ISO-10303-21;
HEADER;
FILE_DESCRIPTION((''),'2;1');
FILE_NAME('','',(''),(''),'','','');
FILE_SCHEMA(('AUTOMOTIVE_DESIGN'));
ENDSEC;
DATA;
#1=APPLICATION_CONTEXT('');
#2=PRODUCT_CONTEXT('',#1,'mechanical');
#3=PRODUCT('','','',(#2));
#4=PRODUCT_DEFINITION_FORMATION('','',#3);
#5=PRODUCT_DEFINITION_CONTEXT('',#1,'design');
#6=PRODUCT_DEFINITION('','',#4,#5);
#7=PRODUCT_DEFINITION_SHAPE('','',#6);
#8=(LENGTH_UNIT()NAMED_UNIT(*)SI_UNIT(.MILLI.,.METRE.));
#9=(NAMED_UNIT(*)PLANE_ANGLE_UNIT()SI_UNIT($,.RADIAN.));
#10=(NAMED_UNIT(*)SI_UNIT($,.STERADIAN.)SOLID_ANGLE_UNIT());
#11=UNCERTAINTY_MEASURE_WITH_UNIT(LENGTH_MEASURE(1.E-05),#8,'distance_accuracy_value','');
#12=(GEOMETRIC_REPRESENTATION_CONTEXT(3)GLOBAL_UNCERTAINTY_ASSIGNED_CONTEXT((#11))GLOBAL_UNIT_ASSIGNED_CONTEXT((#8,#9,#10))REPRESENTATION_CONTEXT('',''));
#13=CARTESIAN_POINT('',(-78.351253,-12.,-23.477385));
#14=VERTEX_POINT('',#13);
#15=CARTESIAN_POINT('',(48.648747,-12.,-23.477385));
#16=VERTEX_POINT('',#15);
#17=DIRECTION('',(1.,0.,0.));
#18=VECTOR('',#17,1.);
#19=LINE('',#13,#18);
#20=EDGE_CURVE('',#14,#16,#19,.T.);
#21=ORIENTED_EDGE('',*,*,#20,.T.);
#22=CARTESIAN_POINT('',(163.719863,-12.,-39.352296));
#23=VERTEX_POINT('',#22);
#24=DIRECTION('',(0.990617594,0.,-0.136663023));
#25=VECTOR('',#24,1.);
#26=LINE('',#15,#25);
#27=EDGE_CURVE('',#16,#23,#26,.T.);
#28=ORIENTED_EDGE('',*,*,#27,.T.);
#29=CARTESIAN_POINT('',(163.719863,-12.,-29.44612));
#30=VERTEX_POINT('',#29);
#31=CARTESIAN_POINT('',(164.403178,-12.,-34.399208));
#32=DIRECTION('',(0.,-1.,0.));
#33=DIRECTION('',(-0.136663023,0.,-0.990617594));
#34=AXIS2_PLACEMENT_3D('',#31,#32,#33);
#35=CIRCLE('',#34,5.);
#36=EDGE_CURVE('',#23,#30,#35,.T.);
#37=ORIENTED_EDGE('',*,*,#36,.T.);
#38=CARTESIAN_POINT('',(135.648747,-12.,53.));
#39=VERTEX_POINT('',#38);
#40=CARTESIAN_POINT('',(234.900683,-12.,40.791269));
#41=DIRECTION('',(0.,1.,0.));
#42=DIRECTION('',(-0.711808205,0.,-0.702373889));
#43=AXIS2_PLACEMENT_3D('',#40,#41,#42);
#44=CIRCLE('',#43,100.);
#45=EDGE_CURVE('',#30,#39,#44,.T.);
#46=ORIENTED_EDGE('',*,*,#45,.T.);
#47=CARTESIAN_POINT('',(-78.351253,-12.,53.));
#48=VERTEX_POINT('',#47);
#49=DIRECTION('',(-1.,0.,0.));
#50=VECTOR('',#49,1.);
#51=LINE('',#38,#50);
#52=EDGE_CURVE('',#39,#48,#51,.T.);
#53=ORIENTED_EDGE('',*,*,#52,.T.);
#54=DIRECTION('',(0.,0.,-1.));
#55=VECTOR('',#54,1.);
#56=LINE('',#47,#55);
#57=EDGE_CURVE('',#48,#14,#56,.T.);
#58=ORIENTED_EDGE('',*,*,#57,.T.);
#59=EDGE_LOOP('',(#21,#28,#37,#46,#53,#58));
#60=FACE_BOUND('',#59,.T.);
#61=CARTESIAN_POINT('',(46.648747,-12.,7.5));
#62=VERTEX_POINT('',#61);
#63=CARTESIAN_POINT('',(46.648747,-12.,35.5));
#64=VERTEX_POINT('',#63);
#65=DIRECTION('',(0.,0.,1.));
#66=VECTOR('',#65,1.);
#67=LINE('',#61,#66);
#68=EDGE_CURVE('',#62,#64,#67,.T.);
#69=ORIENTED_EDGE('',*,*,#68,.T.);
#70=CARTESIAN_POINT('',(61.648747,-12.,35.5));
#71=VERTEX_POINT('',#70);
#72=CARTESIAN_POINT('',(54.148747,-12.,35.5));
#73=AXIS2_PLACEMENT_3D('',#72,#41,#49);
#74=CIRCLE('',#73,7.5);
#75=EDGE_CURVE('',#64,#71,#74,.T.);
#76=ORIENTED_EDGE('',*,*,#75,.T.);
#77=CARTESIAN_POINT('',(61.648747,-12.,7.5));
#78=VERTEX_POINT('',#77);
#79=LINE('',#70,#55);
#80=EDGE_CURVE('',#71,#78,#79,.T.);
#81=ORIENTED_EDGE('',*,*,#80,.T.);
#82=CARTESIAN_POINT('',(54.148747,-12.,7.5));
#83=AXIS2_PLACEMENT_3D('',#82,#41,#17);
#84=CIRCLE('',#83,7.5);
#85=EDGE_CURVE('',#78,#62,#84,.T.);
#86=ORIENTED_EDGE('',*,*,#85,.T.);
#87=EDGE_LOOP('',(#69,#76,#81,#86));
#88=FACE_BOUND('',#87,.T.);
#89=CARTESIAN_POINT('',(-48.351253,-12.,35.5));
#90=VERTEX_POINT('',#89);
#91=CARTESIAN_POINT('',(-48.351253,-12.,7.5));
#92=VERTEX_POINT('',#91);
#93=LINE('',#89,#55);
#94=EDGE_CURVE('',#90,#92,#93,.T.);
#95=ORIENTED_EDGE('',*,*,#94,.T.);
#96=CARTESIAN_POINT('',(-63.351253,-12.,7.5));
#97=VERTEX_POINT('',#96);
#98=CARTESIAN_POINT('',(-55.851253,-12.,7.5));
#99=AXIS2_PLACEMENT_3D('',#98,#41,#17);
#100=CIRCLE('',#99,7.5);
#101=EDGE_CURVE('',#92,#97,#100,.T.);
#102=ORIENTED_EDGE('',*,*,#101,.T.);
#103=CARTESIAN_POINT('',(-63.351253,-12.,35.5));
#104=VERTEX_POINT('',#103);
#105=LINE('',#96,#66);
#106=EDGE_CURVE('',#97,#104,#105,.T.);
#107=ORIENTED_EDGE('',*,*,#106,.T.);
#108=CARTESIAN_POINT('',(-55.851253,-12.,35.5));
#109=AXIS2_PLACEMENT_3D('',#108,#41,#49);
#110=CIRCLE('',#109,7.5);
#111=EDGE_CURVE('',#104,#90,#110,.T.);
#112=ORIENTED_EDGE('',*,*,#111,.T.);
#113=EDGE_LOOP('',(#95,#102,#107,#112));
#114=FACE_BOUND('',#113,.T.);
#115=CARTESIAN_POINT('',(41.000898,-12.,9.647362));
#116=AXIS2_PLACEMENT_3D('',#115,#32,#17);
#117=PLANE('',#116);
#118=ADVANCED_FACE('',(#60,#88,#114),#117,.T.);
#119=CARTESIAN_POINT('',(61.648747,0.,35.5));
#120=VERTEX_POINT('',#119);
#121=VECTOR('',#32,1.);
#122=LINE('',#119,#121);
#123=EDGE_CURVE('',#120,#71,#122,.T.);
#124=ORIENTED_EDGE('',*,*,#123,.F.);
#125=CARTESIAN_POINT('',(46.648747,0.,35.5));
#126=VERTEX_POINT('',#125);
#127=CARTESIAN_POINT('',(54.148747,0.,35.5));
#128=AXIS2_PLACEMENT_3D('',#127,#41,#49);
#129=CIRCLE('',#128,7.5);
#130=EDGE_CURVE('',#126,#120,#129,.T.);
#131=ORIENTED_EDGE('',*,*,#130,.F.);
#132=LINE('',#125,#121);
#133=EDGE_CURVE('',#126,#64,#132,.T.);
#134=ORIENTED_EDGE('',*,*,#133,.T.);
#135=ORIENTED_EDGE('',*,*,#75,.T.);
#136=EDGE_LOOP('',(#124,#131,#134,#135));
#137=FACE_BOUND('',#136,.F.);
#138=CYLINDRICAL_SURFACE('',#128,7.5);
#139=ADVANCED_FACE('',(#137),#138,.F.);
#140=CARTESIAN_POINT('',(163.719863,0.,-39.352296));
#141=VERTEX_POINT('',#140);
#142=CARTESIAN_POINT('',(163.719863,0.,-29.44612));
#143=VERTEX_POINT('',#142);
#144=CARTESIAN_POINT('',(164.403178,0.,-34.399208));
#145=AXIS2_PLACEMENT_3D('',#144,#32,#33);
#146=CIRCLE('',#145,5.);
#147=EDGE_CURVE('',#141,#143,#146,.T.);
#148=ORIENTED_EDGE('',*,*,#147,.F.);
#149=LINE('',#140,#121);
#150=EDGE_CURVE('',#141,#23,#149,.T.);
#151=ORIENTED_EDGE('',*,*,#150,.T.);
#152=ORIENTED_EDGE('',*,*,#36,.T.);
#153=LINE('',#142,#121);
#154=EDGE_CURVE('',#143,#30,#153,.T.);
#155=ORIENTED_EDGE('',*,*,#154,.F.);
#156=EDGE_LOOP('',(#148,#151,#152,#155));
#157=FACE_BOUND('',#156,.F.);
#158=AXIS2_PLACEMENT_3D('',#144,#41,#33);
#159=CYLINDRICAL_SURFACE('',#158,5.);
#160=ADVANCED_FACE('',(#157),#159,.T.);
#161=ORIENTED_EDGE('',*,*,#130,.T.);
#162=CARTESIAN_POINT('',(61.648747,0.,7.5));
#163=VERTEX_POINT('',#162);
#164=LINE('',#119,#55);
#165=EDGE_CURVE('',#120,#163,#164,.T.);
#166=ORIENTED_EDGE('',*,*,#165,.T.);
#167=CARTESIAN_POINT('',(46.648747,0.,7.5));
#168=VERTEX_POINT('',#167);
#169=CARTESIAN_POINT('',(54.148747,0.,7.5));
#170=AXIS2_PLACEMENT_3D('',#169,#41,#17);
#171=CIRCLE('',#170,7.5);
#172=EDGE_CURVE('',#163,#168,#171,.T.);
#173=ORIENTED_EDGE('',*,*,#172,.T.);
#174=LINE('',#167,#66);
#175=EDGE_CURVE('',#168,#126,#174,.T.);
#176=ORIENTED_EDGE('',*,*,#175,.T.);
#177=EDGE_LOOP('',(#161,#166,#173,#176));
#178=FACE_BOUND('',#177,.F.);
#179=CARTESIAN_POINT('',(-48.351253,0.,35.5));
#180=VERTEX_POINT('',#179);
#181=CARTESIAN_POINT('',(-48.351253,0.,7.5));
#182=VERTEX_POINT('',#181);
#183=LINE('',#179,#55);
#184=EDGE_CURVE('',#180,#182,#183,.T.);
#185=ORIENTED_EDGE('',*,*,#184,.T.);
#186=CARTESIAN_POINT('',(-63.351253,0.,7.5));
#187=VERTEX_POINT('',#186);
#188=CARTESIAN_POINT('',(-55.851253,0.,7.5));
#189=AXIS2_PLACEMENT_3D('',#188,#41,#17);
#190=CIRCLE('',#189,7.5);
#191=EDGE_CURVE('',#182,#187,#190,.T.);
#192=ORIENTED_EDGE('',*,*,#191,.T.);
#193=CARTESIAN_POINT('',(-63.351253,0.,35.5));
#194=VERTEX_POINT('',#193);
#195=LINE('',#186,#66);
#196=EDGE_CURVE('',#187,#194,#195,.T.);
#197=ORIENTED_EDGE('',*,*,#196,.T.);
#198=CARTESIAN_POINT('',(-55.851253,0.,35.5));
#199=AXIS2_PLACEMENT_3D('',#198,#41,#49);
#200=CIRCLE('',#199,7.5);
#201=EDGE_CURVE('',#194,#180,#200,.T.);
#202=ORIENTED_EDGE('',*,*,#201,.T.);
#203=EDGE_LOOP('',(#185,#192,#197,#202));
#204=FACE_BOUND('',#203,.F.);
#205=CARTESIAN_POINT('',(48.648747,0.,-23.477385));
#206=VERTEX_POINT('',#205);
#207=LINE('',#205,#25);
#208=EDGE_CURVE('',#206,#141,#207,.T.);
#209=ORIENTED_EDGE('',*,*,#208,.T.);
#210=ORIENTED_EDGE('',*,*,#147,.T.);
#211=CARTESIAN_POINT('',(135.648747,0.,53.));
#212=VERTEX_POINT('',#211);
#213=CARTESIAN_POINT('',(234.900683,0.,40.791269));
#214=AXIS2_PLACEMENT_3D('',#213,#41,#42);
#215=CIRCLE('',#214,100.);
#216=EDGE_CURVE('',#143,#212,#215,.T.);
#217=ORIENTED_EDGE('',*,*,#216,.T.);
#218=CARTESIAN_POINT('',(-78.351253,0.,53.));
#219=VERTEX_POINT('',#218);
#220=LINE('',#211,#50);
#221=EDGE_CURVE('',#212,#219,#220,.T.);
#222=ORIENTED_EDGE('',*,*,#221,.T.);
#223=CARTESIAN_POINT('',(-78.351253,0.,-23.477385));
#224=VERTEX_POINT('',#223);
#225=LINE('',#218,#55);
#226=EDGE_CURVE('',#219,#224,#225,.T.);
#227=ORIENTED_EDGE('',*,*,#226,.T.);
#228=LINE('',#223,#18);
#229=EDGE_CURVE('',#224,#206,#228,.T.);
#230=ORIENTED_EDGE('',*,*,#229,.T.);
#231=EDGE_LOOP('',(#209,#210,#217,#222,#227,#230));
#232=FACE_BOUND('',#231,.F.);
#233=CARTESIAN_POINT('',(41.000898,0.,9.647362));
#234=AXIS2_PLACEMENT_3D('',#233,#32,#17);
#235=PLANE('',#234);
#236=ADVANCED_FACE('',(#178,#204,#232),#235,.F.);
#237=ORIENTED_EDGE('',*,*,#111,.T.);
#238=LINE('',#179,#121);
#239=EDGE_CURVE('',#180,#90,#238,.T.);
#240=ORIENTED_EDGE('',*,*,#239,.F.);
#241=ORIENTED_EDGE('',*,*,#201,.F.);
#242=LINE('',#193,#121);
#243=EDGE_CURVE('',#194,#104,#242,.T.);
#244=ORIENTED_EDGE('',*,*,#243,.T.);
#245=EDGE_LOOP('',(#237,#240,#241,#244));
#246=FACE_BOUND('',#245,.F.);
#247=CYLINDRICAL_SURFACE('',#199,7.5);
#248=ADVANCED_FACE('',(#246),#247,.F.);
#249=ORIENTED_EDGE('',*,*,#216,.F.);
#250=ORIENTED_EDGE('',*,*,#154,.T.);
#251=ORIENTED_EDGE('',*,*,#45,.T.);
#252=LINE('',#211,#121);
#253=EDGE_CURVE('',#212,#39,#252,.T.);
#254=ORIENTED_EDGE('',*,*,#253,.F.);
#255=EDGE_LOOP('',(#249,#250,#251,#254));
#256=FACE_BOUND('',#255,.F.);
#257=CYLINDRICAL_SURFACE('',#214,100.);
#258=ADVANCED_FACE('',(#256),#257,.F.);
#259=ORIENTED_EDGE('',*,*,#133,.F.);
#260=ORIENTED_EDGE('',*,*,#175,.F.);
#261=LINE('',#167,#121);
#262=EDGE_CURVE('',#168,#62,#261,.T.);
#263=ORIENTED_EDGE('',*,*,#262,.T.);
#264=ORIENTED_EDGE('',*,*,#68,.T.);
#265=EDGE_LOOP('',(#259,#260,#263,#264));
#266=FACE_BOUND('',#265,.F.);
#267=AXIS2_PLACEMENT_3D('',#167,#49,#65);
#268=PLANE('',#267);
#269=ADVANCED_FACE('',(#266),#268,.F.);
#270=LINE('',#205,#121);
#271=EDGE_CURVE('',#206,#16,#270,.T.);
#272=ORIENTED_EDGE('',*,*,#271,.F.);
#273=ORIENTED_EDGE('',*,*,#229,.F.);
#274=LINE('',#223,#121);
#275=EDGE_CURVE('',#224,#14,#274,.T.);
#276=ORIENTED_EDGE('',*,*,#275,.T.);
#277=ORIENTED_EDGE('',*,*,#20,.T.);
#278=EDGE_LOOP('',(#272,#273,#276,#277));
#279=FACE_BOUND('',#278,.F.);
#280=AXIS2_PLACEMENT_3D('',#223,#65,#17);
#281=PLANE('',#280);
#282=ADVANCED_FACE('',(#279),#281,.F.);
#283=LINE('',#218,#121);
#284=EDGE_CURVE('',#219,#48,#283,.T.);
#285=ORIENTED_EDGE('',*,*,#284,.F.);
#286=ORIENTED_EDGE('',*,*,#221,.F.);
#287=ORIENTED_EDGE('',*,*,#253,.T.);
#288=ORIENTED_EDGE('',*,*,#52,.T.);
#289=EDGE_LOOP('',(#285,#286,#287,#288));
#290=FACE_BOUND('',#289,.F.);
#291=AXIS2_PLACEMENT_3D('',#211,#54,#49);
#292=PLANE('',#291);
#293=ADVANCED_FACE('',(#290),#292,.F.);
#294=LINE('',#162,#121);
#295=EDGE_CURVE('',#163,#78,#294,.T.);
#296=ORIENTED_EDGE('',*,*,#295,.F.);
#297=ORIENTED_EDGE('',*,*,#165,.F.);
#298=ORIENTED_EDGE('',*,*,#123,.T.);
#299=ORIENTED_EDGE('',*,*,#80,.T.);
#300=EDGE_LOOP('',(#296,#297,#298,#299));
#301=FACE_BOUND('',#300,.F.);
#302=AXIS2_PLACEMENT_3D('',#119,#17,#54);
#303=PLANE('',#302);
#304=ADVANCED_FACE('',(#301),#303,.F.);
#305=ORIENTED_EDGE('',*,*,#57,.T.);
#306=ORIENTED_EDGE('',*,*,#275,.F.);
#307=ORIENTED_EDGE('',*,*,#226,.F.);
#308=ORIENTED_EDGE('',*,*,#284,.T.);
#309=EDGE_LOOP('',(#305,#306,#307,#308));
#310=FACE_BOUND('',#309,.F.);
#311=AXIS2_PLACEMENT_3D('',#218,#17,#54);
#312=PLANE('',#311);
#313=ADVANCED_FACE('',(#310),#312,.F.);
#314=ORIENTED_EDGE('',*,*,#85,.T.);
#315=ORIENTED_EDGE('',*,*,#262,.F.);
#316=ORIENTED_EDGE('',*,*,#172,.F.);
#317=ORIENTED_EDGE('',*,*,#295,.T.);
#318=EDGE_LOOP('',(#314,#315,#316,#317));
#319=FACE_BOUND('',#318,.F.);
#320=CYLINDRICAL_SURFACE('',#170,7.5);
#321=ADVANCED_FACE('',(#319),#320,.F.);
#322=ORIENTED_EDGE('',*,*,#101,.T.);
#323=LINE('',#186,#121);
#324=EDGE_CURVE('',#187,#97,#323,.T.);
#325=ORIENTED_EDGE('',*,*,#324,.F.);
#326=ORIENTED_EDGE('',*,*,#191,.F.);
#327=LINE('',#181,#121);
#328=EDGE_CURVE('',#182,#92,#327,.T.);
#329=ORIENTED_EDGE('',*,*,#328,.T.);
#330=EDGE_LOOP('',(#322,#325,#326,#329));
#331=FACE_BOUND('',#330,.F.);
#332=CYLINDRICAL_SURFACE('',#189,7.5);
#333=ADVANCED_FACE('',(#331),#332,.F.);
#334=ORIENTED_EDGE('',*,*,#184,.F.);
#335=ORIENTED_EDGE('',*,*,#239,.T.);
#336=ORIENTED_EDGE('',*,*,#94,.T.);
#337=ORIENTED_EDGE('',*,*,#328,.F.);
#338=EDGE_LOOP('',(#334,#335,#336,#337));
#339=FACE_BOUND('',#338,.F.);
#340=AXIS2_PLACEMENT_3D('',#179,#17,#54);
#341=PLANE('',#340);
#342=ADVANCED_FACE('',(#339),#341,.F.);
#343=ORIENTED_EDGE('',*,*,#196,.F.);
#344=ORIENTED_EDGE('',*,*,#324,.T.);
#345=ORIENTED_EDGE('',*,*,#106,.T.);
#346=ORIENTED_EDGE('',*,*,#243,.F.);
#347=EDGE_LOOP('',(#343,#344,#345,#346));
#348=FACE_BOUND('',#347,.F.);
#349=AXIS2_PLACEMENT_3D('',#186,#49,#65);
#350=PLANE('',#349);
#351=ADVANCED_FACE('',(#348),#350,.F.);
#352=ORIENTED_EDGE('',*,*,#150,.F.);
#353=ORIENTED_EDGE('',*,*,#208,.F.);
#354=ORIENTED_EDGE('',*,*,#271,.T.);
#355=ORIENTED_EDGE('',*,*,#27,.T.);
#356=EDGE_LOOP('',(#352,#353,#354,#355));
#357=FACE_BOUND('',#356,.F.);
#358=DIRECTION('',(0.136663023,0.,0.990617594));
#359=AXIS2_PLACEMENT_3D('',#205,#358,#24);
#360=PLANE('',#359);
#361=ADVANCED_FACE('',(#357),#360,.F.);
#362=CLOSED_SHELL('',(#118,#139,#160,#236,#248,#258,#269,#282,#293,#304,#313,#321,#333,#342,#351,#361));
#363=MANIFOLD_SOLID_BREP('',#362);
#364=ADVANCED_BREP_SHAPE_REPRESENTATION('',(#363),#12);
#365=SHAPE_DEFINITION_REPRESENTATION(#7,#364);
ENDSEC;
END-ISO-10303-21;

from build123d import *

# Parameters (mm, degrees)
F1_DEPTH = 12


# Not quite as in the source:
# - a feature names something its author has since deleted; it is built from what else it names


with BuildPart() as f1:
    # F0 (on Front) → F1 (new body)
    with BuildSketch(Plane.XZ):
        with BuildLine():
            Line((-78.3512531443, 52.5226152241), (-78.3512531443, -23.4773847759))
            Line((-78.3512531443, -23.4773847759), (48.6487468557, -23.4773847759))
            Line((48.6487468557, -23.4773847759), (163.7198627451, -39.3522962011))
            ThreePointArc((163.7198627451, -39.3522962011), (169.4031778605, -34.3992082296), (163.7198627451, -29.4461202581))
            ThreePointArc((163.7198627451, -29.4461202581), (140.2372169997, 8.5604113595), (135.6487468557, 53))
            Line((135.6487468557, 53), (129.9201593475, 53))
            Line((129.9201593475, 53), (-55.8512531443, 53))
            Line((-55.8512531443, 53), (-78.3512531443, 53))
            Line((-78.3512531443, 53), (-78.3512531443, 52.5226152241))
        make_face()
        with BuildLine():
            Line((-63.3512531443, 7.5), (-63.3512531443, 21.5))
            Line((-63.3512531443, 21.5), (-63.3512531443, 35.5))
            ThreePointArc((-63.3512531443, 35.5), (-55.8512531443, 43), (-48.3512531443, 35.5))
            Line((-48.3512531443, 35.5), (-48.3512531443, 7.5))
            ThreePointArc((-48.3512531443, 7.5), (-55.8512531443, 0), (-63.3512531443, 7.5))
        make_face(mode=Mode.SUBTRACT)
        with BuildLine():
            Line((46.6487468557, 7.5), (46.6487468557, 21.5))
            Line((46.6487468557, 21.5), (46.6487468557, 35.5))
            ThreePointArc((46.6487468557, 35.5), (54.1487468557, 43), (61.6487468557, 35.5))
            Line((61.6487468557, 35.5), (61.6487468557, 7.5))
            ThreePointArc((61.6487468557, 7.5), (54.1487468557, 0), (46.6487468557, 7.5))
        make_face(mode=Mode.SUBTRACT)
    extrude(amount=F1_DEPTH)


solid = f1.part
